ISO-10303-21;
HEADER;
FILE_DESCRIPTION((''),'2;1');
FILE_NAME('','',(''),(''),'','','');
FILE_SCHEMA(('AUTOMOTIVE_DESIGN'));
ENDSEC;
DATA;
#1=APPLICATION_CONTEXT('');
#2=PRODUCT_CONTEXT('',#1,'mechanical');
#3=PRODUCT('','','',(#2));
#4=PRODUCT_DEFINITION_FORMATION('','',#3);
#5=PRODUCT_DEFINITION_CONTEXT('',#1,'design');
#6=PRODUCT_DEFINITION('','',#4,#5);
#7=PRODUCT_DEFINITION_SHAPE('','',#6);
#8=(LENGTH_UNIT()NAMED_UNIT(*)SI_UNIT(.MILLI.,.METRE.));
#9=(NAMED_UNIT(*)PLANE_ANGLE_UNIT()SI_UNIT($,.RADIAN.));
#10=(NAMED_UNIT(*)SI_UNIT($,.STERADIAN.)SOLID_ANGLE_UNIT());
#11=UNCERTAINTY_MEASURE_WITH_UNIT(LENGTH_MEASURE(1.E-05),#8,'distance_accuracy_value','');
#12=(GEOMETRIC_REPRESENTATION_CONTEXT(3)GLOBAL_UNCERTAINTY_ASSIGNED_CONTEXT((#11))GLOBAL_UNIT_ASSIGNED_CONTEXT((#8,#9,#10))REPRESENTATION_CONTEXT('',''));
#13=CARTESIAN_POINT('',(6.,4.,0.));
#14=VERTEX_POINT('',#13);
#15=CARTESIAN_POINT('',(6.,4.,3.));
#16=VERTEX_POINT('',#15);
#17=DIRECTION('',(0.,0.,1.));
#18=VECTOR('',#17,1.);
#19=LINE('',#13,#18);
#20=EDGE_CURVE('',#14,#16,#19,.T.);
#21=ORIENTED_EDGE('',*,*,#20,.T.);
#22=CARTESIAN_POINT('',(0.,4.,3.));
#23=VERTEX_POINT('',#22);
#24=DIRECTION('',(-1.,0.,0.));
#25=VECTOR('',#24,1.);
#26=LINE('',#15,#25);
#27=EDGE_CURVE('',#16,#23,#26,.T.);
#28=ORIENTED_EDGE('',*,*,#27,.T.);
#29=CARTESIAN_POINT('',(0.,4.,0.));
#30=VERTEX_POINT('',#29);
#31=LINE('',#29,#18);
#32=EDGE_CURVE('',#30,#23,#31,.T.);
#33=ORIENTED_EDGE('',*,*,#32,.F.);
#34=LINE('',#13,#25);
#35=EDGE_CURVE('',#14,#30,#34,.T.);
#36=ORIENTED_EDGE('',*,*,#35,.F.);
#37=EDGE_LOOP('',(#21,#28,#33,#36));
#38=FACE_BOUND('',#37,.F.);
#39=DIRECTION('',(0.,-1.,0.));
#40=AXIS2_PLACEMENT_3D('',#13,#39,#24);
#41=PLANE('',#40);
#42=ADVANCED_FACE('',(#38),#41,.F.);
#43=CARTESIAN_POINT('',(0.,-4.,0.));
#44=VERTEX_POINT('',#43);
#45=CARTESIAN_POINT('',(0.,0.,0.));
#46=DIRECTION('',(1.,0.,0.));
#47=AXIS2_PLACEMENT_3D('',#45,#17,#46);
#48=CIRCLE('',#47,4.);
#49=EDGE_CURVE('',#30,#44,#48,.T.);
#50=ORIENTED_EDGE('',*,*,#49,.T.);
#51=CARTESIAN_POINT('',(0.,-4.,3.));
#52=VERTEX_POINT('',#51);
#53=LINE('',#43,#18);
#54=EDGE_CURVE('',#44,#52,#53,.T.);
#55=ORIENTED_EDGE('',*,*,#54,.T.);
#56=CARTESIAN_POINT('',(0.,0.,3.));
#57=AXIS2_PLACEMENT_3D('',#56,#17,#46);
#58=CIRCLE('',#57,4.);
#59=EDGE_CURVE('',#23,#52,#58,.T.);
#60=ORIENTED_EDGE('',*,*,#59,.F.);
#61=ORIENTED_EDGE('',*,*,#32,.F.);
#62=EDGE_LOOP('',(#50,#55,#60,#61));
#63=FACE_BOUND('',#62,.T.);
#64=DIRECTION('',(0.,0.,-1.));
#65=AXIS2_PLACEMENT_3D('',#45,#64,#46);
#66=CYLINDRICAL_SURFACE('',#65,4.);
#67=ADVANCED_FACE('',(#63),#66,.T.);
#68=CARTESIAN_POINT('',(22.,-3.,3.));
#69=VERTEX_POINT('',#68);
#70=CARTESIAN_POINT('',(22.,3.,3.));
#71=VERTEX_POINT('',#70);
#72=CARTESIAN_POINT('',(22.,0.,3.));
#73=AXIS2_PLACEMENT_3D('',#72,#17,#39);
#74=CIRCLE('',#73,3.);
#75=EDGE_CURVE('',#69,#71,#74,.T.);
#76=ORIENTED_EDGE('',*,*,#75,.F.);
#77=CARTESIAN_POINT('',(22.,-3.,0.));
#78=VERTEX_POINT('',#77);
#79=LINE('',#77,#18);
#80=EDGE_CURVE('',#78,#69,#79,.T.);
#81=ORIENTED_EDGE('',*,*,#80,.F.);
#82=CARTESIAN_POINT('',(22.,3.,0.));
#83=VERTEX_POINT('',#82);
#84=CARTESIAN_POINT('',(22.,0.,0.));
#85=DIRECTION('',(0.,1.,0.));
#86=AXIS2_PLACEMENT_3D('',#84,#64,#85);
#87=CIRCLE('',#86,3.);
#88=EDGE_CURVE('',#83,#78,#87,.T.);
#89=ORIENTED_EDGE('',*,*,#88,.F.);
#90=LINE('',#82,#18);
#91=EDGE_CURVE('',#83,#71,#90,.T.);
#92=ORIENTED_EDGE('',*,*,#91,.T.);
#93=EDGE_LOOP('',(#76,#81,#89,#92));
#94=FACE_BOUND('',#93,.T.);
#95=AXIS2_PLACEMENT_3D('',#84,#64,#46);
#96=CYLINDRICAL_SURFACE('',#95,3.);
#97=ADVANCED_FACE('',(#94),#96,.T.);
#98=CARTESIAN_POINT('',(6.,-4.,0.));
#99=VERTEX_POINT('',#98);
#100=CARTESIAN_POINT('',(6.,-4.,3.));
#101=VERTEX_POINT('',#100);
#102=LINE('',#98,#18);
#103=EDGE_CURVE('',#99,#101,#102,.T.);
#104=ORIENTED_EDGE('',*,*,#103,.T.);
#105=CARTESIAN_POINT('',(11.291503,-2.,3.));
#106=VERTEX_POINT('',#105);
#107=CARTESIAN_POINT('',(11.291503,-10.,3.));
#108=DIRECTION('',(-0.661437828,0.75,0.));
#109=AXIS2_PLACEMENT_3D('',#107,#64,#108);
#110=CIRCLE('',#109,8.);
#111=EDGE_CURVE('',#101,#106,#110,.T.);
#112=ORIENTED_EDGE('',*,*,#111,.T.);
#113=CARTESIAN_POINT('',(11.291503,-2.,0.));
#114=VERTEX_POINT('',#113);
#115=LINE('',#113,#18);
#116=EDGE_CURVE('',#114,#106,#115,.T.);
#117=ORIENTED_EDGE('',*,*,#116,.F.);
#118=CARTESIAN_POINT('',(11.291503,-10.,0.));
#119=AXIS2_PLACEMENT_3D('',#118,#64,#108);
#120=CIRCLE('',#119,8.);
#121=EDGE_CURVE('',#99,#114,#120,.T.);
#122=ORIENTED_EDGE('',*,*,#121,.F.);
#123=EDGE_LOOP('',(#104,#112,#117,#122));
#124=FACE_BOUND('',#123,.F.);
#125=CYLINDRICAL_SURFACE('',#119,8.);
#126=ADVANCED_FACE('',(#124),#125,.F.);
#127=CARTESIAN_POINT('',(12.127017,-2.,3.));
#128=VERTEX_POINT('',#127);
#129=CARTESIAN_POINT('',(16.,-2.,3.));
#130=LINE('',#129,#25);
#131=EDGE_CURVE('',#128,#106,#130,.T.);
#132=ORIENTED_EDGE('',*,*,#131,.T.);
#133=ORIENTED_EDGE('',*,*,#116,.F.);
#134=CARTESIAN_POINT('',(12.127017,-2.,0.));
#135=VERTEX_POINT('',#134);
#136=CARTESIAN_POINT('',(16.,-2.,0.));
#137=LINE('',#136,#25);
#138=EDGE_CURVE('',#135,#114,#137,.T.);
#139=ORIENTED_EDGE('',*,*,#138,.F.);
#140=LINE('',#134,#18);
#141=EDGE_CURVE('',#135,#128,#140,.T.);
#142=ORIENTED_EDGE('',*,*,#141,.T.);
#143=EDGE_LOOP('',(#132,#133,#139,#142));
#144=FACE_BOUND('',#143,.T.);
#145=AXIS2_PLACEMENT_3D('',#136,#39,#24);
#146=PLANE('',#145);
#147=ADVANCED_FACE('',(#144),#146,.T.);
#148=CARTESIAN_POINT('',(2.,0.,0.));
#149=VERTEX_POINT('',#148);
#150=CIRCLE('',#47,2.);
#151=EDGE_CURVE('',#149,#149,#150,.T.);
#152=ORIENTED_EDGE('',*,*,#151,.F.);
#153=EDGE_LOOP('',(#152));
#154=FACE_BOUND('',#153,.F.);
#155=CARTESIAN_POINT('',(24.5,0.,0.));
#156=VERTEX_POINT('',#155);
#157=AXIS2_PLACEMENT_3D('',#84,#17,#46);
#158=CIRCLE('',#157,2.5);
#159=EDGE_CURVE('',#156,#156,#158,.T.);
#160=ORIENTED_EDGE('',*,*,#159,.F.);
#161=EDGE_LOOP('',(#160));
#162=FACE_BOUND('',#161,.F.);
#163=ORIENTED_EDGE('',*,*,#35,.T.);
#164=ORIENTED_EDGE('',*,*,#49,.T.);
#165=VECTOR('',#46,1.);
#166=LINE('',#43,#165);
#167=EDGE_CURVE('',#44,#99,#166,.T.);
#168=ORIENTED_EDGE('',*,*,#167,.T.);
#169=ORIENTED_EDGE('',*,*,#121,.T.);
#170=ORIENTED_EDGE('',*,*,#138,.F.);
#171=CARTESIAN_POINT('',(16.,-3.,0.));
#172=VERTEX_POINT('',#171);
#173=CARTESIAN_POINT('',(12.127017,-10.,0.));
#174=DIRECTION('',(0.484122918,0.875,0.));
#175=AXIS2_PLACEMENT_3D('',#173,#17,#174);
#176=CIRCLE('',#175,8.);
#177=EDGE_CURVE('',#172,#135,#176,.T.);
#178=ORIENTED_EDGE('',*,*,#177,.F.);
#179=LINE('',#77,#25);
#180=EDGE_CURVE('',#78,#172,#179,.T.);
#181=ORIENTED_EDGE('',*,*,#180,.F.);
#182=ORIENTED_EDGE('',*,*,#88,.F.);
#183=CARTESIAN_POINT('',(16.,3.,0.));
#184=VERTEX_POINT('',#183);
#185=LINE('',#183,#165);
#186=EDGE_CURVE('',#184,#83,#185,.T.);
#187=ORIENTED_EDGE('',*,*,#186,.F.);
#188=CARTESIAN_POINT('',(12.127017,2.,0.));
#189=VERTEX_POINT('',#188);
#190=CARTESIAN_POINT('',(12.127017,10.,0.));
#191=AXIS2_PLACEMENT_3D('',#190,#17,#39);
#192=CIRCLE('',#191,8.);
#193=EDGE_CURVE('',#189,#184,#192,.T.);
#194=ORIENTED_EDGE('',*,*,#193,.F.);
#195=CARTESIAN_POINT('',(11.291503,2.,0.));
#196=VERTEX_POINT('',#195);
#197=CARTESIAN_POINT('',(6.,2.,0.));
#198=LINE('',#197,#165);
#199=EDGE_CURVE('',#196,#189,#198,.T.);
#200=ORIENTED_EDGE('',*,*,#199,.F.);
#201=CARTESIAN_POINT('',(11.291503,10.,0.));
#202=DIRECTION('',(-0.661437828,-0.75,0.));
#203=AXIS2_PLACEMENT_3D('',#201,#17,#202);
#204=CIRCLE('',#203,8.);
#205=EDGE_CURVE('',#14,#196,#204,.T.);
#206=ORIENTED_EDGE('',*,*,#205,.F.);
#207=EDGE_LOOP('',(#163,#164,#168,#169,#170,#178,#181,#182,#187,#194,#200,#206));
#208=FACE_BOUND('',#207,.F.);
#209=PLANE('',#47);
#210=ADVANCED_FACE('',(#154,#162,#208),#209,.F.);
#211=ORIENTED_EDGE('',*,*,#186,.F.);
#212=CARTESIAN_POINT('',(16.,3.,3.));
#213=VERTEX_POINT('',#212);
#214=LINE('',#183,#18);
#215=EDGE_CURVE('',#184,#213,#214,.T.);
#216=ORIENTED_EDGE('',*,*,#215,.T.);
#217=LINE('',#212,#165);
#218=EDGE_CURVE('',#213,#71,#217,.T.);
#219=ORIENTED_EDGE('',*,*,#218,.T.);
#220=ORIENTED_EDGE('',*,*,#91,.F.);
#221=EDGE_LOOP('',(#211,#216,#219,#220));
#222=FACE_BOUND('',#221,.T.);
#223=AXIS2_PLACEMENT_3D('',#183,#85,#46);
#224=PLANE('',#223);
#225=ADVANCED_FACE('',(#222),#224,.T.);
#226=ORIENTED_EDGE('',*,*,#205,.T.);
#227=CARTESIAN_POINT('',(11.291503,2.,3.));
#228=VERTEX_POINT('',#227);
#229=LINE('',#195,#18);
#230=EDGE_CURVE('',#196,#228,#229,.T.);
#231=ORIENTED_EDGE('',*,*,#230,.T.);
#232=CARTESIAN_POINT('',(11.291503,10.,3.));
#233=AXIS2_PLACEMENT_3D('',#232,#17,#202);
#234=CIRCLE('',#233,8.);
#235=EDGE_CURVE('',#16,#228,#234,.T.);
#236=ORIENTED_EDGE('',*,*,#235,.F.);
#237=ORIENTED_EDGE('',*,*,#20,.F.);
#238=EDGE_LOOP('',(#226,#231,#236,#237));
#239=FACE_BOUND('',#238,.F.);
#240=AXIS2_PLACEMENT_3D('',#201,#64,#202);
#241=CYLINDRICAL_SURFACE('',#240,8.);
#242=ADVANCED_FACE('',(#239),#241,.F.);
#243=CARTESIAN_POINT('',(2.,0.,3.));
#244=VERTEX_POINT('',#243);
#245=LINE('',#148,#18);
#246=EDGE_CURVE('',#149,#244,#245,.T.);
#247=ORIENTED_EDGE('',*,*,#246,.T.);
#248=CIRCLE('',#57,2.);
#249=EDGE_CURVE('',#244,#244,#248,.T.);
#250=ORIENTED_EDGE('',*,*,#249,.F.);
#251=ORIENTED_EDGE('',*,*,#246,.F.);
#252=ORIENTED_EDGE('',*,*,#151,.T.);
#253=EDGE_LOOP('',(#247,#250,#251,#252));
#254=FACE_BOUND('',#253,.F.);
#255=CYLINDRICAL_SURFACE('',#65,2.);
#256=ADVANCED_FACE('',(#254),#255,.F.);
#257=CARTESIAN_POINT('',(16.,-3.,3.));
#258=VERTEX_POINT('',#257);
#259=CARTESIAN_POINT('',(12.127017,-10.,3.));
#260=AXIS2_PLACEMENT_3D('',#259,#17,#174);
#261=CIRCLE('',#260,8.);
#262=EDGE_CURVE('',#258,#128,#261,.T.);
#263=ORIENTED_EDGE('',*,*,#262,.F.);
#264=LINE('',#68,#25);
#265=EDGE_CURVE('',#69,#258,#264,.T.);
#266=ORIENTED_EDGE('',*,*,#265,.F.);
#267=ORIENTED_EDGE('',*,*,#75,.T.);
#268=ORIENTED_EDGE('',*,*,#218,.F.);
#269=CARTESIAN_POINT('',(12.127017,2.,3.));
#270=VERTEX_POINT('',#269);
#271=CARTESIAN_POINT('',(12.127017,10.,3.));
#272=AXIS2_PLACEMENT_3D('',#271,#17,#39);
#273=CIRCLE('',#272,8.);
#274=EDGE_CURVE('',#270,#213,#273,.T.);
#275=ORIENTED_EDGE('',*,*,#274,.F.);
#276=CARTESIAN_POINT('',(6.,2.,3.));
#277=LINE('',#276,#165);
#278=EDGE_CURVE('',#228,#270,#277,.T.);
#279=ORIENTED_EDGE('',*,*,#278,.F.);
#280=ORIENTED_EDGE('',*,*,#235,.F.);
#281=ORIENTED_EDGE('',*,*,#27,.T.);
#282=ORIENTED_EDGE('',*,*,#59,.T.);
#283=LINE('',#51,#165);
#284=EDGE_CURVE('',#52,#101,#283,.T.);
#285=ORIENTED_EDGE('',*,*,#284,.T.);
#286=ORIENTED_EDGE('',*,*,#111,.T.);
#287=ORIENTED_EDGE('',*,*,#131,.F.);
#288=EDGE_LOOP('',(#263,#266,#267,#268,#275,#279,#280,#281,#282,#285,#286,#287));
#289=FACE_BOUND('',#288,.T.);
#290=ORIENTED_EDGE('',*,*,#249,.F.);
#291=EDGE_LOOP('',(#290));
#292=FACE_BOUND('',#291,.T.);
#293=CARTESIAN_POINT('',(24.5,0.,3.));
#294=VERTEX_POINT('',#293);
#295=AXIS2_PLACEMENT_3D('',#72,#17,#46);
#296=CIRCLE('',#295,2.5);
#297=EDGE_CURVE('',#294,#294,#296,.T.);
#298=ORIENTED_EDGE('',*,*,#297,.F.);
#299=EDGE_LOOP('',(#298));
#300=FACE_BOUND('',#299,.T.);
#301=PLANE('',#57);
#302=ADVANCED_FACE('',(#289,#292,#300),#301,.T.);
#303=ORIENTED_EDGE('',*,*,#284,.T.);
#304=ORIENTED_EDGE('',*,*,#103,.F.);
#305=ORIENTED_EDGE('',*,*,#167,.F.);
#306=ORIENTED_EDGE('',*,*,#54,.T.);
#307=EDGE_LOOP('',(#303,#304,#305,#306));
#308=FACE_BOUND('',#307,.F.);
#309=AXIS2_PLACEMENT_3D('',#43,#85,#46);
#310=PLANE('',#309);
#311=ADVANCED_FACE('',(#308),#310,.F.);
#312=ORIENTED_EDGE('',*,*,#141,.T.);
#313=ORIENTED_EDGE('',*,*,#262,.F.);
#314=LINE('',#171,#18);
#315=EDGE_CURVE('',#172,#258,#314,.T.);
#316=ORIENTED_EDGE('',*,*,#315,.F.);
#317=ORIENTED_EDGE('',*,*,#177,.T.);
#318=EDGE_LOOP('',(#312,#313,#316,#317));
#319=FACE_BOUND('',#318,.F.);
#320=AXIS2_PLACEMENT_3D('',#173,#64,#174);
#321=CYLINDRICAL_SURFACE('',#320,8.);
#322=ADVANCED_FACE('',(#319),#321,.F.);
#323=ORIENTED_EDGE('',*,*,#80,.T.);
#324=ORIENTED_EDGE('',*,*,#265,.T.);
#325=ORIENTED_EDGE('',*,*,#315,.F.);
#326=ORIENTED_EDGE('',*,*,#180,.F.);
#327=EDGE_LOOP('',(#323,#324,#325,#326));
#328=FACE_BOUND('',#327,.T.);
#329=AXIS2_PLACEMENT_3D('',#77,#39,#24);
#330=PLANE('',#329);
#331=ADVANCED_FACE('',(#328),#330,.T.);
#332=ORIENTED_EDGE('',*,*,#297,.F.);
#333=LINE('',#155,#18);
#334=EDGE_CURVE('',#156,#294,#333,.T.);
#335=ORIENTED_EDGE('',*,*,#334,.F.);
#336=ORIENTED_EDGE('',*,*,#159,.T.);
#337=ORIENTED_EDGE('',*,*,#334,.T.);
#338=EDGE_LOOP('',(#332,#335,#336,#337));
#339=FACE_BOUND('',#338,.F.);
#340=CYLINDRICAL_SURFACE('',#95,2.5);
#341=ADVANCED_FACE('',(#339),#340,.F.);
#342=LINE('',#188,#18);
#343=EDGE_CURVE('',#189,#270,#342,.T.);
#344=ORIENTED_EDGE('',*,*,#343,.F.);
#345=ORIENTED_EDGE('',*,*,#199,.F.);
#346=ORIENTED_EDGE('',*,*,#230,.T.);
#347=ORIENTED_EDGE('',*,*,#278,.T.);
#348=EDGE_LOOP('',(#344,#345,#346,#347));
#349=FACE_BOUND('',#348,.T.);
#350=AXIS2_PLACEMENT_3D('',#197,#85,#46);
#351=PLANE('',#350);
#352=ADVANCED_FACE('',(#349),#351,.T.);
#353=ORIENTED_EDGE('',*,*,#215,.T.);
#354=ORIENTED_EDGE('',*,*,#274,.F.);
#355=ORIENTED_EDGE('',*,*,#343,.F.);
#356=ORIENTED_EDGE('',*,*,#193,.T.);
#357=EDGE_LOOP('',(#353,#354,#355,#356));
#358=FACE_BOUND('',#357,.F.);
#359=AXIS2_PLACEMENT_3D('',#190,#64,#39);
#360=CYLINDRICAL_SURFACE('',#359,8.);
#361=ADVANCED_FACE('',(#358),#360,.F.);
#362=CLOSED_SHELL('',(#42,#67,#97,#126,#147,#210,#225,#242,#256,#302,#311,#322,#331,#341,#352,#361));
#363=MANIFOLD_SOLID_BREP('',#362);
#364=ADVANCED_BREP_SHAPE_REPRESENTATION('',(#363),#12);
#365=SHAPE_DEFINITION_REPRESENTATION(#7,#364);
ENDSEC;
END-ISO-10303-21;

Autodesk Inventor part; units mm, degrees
ref_plane "YZ Plane" through (0, 0, 0) normal (1, 0, 0) x (0, 1, 0)
ref_plane "XZ Plane" through (0, 0, 0) normal (0, 1, 0) x (-1, 0, 0)
ref_plane "XY Plane" through (0, 0, 0) normal (0, 0, 1) x (1, 0, 0)
sketch "Sketch1" plane through (0, 0, 0) normal (0, 0, 1) x (1, 0, 0)
  circle A0 centre (0, 0) radius 4
  circle A1 centre (0, 0) radius 2
  line L0 (0, -4) -> (6, -4)
  line L1 (6, -4) -> (6, 4)
  line L2 (6, 4) -> (0, 4)
  circle A2 centre (22, 0) radius 2.5
  circle A3 centre (22, 0) radius 3
  line L3 (22, -3) -> (16, -3)
  line L4 (16, -3) -> (16, 3)
  line L5 (16, 3) -> (22, 3)
  line L6 (16, -2) -> (6, -2)
  line L7 (6, 2) -> (16, 2)
  dimension "d0" = 8
  dimension "d1" = 4
  dimension "d8" = 6
  dimension "d9" = 5
  dimension "d10" = 6
  dimension "d11" = 6
  dimension "d12" = 6
  dimension "d17" = 10
  dimension "d19" = 4
extrude "Extrusion1" add sketch "Sketch1" along normal blind 3
fillet "Fillet1" radius 8 1 edges at (6, -2, 1.5)
fillet "Fillet2" radius 8 3 edges at (6, 2, 1.5) (16, 2, 1.5) (16, -2, 1.5)
properties part number "PLEUEL short new"
